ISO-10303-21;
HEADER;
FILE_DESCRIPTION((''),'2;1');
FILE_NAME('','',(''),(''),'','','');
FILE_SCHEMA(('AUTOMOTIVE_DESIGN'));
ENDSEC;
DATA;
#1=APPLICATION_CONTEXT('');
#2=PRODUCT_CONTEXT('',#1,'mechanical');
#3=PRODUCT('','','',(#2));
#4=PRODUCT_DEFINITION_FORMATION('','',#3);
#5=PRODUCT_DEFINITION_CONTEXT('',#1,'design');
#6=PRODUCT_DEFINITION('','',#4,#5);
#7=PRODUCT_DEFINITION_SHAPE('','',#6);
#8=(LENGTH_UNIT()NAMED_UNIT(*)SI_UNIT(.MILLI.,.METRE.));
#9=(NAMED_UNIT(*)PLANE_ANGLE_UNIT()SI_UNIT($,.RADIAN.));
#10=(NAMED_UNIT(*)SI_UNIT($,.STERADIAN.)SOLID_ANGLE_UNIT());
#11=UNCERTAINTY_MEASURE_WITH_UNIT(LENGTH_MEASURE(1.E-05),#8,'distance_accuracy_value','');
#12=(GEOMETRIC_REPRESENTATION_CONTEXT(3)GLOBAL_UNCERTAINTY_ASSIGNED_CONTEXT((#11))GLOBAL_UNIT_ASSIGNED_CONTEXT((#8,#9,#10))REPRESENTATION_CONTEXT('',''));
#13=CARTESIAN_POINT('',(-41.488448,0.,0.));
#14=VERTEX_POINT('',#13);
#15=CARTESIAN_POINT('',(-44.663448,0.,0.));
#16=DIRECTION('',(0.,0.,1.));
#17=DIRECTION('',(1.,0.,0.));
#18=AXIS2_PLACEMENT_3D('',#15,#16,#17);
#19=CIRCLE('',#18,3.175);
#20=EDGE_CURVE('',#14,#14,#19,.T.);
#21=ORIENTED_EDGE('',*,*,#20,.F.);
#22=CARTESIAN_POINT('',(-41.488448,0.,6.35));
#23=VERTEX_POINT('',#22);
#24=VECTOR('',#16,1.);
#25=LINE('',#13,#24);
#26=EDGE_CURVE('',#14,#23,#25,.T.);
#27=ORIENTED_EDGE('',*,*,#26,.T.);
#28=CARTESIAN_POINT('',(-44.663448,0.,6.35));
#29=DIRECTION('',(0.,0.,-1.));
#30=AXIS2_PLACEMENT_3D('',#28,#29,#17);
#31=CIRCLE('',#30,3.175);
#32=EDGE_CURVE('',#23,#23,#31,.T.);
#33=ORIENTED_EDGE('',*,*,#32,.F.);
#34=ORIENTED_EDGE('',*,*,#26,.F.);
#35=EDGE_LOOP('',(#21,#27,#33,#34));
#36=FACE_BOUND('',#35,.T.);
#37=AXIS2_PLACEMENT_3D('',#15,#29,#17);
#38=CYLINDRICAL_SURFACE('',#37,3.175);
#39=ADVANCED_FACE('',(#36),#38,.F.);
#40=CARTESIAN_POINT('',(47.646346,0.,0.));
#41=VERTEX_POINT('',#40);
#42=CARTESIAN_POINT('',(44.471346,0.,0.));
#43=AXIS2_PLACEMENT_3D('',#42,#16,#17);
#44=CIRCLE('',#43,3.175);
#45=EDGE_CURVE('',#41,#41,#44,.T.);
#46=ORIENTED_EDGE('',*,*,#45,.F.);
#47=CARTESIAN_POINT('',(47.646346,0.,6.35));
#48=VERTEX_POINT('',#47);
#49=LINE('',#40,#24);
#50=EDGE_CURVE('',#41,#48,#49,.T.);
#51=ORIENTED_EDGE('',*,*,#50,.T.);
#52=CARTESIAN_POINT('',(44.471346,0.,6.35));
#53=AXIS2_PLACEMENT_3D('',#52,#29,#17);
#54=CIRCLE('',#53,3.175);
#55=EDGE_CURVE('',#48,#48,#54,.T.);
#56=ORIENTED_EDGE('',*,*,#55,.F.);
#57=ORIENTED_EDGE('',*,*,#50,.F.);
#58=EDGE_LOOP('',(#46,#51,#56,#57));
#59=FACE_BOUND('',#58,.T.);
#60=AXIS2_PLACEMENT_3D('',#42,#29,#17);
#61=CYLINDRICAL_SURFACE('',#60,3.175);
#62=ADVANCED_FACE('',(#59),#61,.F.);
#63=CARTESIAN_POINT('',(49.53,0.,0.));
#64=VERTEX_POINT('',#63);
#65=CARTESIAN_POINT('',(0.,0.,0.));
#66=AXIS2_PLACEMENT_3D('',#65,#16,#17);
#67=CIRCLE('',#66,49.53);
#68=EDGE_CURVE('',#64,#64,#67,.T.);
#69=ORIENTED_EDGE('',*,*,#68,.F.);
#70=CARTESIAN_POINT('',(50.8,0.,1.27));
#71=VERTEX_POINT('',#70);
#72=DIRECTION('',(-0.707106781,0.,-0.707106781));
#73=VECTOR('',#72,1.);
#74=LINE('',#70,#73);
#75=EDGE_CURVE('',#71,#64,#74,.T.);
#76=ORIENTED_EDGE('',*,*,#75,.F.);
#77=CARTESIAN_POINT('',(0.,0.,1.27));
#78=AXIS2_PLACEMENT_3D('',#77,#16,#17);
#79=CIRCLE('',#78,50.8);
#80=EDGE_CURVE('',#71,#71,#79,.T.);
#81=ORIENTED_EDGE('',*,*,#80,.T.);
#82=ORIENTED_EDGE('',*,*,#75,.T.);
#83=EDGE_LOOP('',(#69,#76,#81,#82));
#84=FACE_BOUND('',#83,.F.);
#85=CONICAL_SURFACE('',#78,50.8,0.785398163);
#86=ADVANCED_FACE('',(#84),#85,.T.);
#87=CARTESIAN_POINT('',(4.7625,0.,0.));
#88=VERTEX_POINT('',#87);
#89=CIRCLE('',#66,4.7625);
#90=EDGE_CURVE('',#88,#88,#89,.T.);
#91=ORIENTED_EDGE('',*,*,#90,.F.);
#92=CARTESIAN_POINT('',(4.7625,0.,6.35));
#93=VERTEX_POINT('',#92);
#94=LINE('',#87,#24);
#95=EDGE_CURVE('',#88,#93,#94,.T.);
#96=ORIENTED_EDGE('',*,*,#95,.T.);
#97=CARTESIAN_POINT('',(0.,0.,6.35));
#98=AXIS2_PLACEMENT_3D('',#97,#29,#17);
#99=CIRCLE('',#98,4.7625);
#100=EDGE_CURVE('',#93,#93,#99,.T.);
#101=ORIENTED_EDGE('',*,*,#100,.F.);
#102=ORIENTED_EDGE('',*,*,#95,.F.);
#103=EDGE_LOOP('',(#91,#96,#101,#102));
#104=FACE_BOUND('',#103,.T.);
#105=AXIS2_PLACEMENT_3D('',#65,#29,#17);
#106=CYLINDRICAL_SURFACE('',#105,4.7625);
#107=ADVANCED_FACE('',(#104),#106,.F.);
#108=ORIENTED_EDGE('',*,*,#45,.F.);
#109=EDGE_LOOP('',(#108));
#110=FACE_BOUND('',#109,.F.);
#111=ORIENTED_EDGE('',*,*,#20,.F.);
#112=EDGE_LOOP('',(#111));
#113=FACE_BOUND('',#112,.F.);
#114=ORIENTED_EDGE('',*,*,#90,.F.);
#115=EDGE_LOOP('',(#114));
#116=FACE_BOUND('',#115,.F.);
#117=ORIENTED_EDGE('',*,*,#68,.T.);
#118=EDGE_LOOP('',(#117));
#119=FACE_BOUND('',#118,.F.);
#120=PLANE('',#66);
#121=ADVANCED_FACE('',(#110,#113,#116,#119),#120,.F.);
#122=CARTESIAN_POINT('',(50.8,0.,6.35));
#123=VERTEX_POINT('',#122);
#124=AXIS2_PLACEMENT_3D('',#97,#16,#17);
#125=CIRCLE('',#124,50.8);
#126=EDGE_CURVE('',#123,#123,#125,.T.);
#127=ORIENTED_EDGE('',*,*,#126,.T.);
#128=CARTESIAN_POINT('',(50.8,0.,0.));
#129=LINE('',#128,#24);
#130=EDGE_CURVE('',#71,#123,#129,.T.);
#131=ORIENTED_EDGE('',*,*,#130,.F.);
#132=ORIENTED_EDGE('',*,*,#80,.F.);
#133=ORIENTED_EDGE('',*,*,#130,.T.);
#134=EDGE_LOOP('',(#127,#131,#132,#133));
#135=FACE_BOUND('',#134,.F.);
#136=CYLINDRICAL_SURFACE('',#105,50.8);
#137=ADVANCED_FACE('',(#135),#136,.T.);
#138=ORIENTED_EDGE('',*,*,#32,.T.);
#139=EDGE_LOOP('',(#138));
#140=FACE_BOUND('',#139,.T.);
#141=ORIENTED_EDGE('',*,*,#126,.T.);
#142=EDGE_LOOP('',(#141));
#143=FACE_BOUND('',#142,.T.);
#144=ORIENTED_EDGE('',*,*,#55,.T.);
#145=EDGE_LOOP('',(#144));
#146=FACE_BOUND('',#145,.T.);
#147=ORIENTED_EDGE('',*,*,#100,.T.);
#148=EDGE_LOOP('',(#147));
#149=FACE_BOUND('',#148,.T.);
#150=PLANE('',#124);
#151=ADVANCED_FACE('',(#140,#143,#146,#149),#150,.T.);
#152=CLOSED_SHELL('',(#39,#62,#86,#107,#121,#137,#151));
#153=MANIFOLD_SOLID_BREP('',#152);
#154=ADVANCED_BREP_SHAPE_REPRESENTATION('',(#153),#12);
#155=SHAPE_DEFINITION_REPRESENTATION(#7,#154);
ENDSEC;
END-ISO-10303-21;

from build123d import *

# Parameters (mm, degrees)
F0_R     = 50.8
F1_DEPTH = 6.35
F2_R     = 4.7625
F2_R_2   = 3.175
F3_DEPTH = 25.4
F4_SIZE  = 1.27


# Not quite as in the source:
# - a length typed as a fraction of an inch, garbled in the dataset ("3 / 203.2 mm" for 3/8 in), is restored


with BuildPart() as f1:
    # F0 (on Top) → F1 (new body)
    with BuildSketch(Plane.XY):
        Circle(F0_R)
    extrude(amount=F1_DEPTH)

    # F2 (on Top) → F3 (cut)
    with BuildSketch(Plane.XY):
        Circle(F2_R)
        with Locations((-44.6634478867, 0)):
            Circle(F2_R_2)
        with Locations((44.4713458419, 0)):
            Circle(F2_R_2)
    extrude(amount=F3_DEPTH, mode=Mode.SUBTRACT)

    # F4
    f4_edges = [f1.edges().sort_by_distance(p)[0] for p in [
        (-50.8, 0, 0),
    ]]
    chamfer(f4_edges, length=F4_SIZE)


solid = f1.part
